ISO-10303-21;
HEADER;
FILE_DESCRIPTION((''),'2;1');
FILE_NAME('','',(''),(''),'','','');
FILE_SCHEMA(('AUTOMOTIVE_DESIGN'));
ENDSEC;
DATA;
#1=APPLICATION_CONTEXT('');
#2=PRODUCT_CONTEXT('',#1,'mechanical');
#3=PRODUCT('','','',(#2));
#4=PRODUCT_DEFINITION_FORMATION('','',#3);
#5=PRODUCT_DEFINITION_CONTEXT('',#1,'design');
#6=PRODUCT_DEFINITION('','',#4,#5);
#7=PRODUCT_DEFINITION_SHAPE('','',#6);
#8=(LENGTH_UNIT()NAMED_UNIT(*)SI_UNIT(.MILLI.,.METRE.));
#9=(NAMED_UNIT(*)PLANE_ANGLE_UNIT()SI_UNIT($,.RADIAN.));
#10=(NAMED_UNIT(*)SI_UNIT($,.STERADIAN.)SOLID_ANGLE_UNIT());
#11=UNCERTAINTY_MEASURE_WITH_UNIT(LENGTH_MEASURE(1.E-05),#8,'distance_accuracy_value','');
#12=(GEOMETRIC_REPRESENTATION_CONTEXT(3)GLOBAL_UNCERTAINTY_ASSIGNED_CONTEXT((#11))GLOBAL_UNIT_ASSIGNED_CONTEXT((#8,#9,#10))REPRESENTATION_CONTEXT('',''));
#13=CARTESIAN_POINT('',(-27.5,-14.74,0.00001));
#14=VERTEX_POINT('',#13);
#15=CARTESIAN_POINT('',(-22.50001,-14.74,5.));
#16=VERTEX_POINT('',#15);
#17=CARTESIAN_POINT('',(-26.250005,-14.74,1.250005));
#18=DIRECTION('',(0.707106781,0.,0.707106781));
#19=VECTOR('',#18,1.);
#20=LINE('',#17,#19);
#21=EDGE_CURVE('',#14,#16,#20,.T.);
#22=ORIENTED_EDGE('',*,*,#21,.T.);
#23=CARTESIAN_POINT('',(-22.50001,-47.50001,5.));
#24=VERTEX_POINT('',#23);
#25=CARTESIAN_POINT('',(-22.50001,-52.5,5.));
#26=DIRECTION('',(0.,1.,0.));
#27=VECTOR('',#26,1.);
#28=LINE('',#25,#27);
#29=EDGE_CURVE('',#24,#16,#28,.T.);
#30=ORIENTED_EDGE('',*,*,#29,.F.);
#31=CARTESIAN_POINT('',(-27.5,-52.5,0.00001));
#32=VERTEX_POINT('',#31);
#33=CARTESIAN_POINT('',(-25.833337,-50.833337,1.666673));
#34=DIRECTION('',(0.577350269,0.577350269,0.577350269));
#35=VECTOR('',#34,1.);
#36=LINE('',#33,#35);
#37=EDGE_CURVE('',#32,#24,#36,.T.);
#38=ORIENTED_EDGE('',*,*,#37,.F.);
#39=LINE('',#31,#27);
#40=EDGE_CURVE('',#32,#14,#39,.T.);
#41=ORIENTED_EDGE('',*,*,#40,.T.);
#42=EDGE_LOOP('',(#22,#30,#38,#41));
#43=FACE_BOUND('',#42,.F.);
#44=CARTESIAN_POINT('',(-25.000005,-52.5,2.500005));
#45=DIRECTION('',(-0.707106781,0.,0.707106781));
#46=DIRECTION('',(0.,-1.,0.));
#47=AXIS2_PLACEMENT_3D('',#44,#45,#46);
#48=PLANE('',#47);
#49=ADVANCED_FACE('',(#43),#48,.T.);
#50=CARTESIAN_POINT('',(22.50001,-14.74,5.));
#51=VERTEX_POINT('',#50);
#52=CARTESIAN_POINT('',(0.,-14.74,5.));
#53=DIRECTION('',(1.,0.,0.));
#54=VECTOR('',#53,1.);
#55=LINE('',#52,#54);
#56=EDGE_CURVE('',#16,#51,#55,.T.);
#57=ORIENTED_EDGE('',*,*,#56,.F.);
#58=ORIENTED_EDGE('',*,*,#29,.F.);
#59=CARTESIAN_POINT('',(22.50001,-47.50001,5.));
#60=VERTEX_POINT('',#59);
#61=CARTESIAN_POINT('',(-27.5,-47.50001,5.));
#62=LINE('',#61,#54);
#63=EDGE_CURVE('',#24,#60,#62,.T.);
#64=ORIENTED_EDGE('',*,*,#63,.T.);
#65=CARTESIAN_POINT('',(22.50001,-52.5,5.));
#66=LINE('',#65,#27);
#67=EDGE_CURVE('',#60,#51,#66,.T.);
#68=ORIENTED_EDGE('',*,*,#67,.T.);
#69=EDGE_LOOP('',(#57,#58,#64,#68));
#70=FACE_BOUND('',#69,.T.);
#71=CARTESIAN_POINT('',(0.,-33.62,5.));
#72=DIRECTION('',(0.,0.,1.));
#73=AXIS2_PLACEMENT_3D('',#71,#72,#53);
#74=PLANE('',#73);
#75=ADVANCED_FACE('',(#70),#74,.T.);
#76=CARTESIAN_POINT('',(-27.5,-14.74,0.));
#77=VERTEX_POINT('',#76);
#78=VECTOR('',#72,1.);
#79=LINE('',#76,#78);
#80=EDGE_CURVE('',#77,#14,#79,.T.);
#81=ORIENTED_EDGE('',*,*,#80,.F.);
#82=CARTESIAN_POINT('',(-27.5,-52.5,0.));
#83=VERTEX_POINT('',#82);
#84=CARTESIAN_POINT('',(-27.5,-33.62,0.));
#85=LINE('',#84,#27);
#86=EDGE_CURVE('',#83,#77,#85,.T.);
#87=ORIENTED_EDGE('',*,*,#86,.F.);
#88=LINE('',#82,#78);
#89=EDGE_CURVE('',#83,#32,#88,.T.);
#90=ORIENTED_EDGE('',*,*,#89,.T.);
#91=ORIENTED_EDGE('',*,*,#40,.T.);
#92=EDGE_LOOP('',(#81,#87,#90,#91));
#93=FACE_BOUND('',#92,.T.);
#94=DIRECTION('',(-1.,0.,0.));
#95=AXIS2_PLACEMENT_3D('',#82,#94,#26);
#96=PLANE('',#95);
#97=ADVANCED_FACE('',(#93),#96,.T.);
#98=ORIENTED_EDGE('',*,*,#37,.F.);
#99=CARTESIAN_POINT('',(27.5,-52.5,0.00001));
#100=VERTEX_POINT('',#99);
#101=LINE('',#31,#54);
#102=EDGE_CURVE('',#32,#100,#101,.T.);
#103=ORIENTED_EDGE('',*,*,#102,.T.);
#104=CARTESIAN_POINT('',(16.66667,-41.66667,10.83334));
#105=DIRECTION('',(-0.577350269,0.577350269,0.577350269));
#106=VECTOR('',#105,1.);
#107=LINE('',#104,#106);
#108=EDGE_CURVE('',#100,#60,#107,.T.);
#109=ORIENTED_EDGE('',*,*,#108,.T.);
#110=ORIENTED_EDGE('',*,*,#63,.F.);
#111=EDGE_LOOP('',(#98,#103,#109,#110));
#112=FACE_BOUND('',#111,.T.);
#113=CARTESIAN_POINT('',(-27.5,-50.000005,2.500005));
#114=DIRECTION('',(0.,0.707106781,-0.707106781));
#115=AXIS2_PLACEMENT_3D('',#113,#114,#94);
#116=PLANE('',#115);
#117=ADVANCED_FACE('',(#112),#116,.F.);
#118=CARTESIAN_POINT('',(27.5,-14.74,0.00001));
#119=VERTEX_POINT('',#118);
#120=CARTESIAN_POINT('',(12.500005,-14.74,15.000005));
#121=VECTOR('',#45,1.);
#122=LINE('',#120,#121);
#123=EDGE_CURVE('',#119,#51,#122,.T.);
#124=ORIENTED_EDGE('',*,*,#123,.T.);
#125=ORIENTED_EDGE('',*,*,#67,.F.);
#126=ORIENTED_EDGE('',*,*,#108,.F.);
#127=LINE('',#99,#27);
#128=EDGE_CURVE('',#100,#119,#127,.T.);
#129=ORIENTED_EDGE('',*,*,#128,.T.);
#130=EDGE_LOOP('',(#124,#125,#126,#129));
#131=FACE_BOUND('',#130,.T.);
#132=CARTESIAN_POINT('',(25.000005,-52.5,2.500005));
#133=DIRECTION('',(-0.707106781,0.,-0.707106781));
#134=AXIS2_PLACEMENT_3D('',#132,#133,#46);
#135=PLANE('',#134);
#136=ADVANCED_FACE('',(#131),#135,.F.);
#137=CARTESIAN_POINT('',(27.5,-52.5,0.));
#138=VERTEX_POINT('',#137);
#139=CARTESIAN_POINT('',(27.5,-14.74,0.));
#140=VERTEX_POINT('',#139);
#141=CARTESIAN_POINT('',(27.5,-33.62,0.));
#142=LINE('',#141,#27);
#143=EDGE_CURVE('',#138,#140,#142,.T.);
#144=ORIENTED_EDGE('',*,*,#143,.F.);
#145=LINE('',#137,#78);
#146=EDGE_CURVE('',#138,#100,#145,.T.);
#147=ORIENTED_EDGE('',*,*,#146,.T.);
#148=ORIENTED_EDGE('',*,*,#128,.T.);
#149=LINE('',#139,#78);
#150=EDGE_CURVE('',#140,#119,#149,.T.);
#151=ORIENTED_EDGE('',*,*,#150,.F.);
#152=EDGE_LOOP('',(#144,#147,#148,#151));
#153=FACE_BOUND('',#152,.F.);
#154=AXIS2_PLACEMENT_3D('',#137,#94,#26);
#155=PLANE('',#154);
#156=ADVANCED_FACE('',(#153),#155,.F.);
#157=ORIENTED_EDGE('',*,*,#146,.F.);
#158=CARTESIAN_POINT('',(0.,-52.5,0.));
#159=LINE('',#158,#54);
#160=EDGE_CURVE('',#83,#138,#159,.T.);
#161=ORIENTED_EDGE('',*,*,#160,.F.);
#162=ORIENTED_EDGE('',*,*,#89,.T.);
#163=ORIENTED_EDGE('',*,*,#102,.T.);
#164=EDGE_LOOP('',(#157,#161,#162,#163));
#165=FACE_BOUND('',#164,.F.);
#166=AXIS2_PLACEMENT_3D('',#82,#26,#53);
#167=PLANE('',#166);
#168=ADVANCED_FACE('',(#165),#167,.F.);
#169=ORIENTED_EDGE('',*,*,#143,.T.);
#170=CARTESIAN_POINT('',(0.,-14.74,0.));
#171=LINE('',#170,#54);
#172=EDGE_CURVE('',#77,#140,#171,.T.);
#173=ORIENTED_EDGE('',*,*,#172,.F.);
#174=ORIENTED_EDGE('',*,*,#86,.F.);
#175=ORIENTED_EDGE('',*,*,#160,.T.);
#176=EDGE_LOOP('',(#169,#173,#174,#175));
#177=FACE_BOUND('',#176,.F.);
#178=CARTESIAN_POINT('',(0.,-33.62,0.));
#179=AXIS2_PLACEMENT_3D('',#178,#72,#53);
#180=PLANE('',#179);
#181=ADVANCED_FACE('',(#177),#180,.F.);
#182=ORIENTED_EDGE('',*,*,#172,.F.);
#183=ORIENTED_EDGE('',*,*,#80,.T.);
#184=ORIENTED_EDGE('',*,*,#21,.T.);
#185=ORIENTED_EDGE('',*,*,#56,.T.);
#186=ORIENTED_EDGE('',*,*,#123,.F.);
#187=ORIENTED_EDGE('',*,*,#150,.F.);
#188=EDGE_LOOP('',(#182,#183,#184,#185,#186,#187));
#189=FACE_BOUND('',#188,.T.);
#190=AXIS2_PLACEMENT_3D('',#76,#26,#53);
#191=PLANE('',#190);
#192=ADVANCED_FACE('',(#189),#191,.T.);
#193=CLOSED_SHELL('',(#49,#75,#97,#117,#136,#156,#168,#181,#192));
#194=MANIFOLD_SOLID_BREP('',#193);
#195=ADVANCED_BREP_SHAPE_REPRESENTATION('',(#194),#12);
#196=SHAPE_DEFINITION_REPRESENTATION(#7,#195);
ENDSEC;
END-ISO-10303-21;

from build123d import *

# Parameters (mm, degrees)
F0_W     = 55
F0_H     = 37.76
F1_DEPTH = 5
F2_SIZE  = 4.99999


# Not quite as in the source:
# - a fillet or chamfer is up to 0.001 mm smaller than in the source, because OpenCascade refuses the exact size


with BuildPart() as f1:
    # F0 (on Top) → F1 (new body)
    with BuildSketch(Plane.XY):
        with Locations((0, -33.62)):
            Rectangle(F0_W, F0_H)
    extrude(amount=F1_DEPTH)

    # F2 (size 5 in the source; OpenCascade refuses exactly that, so slightly less here)
    f2_edges = [f1.edges().sort_by_distance(p)[0] for p in [
        (-27.5, -33.62, 5),
        (27.5, -33.62, 5),
        (0, -52.5, 5),
    ]]
    chamfer(f2_edges, length=F2_SIZE)


solid = f1.part
